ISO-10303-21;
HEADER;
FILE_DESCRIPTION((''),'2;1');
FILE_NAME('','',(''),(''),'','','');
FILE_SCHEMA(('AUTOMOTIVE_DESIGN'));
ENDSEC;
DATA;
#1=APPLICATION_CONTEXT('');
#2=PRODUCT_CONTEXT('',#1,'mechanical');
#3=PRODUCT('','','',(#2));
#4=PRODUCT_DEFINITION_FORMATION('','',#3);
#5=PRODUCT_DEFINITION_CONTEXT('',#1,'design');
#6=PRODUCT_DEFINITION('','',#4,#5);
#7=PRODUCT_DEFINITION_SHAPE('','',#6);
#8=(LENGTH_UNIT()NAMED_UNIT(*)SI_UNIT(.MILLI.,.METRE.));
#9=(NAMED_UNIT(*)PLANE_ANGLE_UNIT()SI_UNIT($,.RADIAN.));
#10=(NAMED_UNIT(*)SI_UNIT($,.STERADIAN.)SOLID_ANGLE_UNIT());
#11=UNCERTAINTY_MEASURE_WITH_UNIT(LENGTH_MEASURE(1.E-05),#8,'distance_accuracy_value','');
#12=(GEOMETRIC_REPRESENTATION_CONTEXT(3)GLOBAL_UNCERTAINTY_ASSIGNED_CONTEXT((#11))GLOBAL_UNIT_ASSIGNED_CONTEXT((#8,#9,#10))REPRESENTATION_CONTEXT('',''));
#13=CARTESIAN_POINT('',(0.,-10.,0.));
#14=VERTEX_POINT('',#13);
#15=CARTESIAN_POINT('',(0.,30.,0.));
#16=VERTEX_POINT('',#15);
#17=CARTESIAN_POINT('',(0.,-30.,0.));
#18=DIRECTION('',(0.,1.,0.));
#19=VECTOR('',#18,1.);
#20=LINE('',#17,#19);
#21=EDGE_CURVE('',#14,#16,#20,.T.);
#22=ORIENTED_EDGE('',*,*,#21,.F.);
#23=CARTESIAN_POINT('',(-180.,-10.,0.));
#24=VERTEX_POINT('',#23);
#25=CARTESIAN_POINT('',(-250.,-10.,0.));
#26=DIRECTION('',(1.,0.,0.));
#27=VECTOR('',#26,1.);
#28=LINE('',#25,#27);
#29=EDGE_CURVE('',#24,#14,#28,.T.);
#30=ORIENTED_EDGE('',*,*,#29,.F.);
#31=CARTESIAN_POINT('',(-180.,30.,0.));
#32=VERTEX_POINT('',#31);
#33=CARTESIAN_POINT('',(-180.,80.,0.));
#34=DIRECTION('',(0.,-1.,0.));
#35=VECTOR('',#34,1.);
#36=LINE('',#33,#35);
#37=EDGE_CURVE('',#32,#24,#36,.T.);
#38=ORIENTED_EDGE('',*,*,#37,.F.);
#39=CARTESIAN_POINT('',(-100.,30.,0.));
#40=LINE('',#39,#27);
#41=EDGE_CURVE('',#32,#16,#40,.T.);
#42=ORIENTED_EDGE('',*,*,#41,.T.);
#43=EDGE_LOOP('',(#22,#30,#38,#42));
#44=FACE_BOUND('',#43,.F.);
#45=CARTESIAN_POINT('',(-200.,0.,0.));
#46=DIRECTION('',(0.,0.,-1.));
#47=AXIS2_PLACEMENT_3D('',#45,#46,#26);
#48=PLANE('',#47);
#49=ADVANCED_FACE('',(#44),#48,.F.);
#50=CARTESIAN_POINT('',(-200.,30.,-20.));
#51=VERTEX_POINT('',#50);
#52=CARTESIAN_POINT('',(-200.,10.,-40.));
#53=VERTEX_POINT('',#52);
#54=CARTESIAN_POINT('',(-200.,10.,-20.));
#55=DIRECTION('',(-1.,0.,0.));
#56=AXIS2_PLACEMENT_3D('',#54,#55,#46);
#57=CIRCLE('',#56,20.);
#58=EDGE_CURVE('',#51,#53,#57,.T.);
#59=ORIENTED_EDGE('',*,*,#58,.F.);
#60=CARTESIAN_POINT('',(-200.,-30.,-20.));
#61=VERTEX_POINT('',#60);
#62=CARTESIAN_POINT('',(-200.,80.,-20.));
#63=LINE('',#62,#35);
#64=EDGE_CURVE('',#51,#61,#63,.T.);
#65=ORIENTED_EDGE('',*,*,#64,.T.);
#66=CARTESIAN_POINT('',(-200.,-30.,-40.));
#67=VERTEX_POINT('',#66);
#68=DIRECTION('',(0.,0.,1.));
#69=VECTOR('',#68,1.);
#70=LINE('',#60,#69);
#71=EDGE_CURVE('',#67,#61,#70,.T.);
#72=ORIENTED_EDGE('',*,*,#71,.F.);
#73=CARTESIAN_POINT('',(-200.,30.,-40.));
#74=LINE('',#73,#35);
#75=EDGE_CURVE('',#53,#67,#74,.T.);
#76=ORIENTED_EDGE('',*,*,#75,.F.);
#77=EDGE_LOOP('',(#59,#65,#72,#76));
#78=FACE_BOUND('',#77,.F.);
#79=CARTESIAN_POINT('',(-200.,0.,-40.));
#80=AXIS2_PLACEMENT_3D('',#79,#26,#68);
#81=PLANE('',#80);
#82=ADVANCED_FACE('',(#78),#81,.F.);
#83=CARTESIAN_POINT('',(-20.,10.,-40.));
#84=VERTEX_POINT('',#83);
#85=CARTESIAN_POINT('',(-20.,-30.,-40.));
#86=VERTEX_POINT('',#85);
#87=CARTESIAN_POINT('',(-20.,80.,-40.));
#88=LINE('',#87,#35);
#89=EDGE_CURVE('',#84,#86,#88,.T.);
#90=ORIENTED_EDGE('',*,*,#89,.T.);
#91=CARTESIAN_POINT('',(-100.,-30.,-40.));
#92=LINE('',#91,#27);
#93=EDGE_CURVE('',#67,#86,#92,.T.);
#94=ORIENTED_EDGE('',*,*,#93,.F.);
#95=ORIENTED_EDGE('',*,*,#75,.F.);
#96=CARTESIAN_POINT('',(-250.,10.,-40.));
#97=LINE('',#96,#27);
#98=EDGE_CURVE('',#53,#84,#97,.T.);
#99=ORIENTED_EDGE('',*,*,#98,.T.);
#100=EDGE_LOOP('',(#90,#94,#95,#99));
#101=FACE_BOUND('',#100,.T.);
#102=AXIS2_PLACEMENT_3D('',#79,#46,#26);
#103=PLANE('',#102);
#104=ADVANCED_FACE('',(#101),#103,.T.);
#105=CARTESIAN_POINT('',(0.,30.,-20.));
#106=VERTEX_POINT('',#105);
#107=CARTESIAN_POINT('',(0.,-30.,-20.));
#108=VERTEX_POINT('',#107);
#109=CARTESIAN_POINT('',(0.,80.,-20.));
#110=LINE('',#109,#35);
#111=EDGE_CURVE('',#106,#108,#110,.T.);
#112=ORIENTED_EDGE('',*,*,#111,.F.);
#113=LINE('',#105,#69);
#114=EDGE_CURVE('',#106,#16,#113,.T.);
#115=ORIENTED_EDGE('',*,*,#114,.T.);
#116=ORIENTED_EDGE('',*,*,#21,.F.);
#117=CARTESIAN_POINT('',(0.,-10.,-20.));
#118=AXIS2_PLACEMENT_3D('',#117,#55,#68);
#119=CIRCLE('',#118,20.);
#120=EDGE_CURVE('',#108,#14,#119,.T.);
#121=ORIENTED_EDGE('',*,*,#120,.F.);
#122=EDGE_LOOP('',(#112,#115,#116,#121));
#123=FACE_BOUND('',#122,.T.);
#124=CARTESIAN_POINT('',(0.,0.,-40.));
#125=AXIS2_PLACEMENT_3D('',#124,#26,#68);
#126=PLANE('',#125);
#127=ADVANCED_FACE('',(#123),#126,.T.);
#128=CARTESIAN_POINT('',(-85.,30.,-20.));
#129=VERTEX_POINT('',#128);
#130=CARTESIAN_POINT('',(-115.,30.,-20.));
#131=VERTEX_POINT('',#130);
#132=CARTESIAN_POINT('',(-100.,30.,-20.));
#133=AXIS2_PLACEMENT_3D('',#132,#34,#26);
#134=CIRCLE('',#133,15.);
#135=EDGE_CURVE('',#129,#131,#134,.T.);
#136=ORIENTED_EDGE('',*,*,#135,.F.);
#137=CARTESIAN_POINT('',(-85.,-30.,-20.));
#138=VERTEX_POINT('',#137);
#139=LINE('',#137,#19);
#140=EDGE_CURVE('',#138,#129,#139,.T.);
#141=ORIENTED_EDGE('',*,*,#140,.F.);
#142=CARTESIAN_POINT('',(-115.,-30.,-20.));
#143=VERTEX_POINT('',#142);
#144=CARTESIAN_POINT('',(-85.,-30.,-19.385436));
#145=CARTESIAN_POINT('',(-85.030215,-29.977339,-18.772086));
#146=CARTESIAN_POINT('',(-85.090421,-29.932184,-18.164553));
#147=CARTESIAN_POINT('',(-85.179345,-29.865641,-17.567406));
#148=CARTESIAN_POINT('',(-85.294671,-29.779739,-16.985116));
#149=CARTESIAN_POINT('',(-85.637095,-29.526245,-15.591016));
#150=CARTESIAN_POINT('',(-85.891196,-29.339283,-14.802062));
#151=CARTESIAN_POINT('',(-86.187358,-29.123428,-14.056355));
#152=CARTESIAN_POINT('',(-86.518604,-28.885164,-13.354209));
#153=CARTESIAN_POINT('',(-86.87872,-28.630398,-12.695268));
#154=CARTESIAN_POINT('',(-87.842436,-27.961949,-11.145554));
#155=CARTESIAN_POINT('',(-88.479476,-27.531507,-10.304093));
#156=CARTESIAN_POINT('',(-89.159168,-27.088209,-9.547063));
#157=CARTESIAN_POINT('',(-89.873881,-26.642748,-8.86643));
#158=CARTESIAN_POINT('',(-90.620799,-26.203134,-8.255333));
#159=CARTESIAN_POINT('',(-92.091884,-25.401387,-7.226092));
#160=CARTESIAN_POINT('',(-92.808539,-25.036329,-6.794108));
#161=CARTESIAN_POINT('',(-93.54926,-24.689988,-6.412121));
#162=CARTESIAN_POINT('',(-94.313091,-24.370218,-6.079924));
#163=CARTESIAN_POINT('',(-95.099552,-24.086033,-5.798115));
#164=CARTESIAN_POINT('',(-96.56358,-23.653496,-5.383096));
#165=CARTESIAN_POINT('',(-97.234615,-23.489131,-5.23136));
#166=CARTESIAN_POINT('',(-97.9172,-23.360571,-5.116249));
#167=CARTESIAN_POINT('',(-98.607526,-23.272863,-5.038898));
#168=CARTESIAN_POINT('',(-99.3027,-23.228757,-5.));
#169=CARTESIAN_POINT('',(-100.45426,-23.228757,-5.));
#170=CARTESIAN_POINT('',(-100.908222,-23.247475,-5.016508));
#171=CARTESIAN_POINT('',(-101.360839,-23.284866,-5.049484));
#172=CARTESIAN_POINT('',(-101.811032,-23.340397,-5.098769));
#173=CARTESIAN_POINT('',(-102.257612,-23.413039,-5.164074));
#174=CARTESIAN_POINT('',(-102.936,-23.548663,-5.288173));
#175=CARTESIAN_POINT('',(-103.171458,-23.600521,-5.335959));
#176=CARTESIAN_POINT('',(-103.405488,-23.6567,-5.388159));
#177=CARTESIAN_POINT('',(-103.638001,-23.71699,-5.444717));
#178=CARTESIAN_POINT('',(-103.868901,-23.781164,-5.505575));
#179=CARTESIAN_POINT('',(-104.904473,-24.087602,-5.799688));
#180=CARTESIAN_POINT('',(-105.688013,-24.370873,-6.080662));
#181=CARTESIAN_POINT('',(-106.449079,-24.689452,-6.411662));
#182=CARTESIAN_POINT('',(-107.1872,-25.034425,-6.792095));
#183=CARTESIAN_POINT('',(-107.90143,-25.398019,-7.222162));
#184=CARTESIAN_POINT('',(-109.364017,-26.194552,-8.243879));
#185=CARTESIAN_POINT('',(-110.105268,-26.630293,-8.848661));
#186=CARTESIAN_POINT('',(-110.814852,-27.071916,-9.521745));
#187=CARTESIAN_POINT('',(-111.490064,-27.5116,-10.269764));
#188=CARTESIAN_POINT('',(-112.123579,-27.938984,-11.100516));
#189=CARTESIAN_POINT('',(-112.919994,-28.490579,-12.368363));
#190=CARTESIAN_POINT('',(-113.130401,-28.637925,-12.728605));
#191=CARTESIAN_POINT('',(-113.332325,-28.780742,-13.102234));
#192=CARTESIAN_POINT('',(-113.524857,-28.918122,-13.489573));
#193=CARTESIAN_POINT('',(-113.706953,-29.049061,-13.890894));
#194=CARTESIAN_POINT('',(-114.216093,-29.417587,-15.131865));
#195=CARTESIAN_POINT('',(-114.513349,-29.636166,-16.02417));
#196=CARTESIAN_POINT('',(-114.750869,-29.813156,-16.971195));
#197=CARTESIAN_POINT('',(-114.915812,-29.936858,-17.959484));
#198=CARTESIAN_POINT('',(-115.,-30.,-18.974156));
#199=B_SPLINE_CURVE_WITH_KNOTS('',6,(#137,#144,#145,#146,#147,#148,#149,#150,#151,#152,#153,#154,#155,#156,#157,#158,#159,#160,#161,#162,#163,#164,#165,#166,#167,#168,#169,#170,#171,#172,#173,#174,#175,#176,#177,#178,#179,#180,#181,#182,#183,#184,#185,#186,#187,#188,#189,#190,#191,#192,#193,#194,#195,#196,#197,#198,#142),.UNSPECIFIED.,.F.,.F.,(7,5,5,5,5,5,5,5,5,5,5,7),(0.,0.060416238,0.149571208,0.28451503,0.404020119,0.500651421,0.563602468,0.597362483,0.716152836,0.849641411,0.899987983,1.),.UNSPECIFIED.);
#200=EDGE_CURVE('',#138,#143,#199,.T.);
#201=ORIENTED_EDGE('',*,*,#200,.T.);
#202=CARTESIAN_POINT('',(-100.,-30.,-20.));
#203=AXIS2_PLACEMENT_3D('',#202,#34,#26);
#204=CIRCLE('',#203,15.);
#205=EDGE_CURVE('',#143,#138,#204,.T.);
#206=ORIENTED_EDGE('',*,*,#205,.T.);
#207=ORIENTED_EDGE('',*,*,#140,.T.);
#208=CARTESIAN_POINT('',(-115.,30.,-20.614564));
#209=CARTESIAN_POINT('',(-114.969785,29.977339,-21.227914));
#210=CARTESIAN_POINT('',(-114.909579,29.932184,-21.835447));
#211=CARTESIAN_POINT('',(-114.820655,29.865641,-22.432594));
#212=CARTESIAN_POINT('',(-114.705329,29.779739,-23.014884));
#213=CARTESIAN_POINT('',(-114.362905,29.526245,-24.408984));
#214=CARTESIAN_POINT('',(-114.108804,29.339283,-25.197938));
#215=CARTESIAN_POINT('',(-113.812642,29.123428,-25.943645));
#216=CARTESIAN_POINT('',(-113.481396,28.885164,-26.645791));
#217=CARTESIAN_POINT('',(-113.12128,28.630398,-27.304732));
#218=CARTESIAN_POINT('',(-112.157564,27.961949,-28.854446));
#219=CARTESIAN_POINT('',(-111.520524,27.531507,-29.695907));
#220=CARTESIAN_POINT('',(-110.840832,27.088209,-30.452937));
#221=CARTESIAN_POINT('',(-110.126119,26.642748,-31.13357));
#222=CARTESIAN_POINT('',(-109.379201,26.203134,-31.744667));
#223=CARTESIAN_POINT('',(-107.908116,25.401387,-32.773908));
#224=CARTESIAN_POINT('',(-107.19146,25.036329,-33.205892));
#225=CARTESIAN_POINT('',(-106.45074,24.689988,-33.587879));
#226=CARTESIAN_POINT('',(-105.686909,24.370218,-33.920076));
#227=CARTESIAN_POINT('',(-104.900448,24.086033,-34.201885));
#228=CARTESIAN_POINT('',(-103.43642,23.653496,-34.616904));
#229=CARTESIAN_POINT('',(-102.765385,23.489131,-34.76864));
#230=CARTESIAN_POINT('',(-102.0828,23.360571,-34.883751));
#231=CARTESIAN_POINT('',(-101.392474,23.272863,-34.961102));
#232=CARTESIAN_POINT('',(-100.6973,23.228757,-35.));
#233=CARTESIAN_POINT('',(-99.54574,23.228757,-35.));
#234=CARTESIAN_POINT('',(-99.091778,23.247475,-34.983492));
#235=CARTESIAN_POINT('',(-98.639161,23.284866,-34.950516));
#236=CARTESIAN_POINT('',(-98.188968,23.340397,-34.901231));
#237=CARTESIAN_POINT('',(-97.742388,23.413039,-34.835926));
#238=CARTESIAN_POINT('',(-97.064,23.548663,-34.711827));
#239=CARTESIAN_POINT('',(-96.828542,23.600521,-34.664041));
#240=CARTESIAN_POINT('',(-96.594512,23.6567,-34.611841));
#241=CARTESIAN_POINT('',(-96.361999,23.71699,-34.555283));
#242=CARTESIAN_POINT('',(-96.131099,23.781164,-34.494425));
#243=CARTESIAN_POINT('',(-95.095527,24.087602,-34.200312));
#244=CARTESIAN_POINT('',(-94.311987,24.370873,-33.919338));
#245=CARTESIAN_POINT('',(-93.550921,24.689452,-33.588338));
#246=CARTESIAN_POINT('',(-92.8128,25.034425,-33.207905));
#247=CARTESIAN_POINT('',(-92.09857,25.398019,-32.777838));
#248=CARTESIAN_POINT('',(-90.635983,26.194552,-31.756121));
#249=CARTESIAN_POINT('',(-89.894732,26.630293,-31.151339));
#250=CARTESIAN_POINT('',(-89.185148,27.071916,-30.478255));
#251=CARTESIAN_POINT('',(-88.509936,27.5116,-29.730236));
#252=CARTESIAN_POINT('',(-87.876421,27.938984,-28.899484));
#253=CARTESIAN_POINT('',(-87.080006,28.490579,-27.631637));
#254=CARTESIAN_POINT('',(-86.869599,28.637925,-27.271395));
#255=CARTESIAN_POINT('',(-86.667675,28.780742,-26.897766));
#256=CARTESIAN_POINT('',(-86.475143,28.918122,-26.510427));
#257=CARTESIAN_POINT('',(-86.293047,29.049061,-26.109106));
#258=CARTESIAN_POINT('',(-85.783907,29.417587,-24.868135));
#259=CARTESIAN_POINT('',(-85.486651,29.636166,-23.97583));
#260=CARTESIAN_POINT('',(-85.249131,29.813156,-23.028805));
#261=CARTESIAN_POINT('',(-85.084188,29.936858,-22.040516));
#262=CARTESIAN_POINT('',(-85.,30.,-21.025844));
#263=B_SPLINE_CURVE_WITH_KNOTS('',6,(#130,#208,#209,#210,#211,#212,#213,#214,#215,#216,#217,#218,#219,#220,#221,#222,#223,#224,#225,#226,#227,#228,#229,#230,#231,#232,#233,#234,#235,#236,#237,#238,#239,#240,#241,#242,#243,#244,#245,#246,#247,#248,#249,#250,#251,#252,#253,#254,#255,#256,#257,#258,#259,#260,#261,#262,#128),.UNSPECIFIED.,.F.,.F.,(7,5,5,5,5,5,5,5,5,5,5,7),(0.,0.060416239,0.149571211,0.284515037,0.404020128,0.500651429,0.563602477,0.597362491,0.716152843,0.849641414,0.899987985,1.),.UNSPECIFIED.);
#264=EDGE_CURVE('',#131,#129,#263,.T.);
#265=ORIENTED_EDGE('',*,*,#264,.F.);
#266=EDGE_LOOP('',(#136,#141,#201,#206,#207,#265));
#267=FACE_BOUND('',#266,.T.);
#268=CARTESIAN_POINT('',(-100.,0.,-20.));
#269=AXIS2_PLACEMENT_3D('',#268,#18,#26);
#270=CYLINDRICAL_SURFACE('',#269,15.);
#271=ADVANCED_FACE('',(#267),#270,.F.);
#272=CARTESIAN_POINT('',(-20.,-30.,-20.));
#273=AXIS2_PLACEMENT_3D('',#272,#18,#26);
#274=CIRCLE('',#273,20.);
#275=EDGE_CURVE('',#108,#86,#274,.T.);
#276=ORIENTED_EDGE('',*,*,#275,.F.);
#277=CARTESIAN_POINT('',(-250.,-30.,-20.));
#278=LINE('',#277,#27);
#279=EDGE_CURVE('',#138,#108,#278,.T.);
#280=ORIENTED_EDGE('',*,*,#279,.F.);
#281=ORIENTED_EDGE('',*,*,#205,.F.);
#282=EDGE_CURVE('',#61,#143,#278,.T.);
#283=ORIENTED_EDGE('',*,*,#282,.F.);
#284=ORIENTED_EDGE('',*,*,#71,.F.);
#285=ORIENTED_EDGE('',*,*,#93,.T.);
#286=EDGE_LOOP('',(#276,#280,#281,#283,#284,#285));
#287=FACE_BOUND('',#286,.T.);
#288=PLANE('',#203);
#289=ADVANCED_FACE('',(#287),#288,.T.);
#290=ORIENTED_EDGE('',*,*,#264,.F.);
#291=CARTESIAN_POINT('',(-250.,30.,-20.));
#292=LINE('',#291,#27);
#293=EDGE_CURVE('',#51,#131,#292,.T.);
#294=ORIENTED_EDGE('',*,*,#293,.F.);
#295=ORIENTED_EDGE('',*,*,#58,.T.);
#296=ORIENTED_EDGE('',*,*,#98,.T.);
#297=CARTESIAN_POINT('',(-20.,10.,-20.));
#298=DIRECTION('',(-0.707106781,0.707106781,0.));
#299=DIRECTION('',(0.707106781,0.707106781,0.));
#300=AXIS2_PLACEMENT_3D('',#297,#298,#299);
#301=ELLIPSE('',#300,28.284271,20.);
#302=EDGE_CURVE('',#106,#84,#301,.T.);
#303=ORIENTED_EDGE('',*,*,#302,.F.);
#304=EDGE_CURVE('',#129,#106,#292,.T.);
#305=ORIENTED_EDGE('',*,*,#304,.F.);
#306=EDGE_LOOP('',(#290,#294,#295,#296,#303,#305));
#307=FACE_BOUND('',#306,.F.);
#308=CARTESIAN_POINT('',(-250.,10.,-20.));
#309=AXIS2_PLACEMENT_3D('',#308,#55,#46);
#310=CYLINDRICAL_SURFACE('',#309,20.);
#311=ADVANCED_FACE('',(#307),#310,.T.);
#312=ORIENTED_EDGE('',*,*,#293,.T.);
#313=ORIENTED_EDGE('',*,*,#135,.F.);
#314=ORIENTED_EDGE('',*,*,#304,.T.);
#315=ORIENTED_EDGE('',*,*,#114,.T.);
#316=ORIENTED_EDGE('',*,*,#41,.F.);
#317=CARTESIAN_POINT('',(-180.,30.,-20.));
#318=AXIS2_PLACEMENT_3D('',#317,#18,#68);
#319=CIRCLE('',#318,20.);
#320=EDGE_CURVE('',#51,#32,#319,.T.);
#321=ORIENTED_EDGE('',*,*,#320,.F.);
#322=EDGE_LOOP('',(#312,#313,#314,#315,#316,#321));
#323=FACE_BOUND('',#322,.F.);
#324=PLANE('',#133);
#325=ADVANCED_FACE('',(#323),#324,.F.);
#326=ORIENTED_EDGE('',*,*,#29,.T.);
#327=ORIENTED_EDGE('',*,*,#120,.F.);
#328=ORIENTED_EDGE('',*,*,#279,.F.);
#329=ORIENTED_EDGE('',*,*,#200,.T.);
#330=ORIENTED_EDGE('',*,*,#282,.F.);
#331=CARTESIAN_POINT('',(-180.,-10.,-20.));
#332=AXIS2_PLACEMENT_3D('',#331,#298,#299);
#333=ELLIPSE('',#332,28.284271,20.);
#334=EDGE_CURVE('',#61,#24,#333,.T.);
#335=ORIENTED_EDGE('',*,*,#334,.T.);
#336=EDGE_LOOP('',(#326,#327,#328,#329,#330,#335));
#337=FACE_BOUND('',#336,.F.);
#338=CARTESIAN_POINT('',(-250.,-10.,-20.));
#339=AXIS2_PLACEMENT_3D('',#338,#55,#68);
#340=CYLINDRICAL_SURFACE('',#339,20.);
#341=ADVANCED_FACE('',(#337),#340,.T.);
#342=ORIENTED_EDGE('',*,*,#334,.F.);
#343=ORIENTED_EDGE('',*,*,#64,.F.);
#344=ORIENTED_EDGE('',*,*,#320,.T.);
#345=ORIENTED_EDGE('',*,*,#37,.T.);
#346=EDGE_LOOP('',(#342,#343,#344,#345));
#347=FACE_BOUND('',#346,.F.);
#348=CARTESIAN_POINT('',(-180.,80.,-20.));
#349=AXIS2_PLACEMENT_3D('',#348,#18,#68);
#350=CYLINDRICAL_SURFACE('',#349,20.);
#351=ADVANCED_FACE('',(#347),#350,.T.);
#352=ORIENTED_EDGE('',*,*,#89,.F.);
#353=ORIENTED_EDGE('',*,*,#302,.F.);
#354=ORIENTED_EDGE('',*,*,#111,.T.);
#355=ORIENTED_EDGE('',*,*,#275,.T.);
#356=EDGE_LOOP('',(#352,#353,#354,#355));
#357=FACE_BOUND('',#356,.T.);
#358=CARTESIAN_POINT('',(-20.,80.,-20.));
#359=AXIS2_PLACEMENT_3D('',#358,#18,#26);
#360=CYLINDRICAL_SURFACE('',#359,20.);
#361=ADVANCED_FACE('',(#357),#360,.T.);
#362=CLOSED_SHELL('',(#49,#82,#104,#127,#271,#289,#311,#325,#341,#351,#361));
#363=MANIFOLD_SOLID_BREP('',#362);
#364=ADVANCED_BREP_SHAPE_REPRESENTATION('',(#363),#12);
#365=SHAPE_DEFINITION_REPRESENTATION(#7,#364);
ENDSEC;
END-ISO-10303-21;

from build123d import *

# Parameters (mm, degrees)
F0_W        = 200
F0_H        = 40
F0_R        = 15
F1_DEPTH    = 30
F2_T1_DEPTH = 160
F2_T3_DEPTH = 300


# Not quite as in the source:
# - a fillet or chamfer that OpenCascade refuses, or shapes differently, is made with other operations: its cross-section is extruded or revolved along the edge and cut away or added


with BuildPart() as f1:
    # F0 (on Front) → F1 (new body, symmetric)
    with BuildSketch(Plane.XZ):
        with Locations((-100, -20)):
            Rectangle(F0_W, F0_H)
        with Locations((-100, -20)):
            Circle(F0_R, mode=Mode.SUBTRACT)
    extrude(amount=F1_DEPTH, both=True)

    # F2: fillet of radius 20 on 4 edges, made by hand

    # F2_s2 → F2_t1 (cut)
    with BuildSketch(Plane.XZ.offset(-80)):
        with BuildLine():
            ThreePointArc((-180, 0), (-194.1421356237, -5.8578643763), (-200, -20))
            Line((-200, -20), (-200, 0))
            Line((-200, 0), (-180, 0))
        make_face()
        with BuildLine():
            ThreePointArc((0, -20), (-5.8578643763, -34.1421356237), (-20, -40))
            Line((-20, -40), (0, -40))
            Line((0, -40), (0, -20))
        make_face()
    extrude(amount=F2_T1_DEPTH, mode=Mode.SUBTRACT)

    # F2_s4 → F2_t3 (cut)
    with BuildSketch(Plane.YZ.offset(-250)):
        with BuildLine():
            ThreePointArc((-10, 0), (-24.1421356237, -5.8578643763), (-30, -20))
            Line((-30, -20), (-30, 0))
            Line((-30, 0), (-10, 0))
        make_face()
        with BuildLine():
            ThreePointArc((10, -40), (24.1421356237, -34.1421356237), (30, -20))
            Line((30, -20), (30, -40))
            Line((30, -40), (10, -40))
        make_face()
    extrude(amount=F2_T3_DEPTH, mode=Mode.SUBTRACT)


solid = f1.part
